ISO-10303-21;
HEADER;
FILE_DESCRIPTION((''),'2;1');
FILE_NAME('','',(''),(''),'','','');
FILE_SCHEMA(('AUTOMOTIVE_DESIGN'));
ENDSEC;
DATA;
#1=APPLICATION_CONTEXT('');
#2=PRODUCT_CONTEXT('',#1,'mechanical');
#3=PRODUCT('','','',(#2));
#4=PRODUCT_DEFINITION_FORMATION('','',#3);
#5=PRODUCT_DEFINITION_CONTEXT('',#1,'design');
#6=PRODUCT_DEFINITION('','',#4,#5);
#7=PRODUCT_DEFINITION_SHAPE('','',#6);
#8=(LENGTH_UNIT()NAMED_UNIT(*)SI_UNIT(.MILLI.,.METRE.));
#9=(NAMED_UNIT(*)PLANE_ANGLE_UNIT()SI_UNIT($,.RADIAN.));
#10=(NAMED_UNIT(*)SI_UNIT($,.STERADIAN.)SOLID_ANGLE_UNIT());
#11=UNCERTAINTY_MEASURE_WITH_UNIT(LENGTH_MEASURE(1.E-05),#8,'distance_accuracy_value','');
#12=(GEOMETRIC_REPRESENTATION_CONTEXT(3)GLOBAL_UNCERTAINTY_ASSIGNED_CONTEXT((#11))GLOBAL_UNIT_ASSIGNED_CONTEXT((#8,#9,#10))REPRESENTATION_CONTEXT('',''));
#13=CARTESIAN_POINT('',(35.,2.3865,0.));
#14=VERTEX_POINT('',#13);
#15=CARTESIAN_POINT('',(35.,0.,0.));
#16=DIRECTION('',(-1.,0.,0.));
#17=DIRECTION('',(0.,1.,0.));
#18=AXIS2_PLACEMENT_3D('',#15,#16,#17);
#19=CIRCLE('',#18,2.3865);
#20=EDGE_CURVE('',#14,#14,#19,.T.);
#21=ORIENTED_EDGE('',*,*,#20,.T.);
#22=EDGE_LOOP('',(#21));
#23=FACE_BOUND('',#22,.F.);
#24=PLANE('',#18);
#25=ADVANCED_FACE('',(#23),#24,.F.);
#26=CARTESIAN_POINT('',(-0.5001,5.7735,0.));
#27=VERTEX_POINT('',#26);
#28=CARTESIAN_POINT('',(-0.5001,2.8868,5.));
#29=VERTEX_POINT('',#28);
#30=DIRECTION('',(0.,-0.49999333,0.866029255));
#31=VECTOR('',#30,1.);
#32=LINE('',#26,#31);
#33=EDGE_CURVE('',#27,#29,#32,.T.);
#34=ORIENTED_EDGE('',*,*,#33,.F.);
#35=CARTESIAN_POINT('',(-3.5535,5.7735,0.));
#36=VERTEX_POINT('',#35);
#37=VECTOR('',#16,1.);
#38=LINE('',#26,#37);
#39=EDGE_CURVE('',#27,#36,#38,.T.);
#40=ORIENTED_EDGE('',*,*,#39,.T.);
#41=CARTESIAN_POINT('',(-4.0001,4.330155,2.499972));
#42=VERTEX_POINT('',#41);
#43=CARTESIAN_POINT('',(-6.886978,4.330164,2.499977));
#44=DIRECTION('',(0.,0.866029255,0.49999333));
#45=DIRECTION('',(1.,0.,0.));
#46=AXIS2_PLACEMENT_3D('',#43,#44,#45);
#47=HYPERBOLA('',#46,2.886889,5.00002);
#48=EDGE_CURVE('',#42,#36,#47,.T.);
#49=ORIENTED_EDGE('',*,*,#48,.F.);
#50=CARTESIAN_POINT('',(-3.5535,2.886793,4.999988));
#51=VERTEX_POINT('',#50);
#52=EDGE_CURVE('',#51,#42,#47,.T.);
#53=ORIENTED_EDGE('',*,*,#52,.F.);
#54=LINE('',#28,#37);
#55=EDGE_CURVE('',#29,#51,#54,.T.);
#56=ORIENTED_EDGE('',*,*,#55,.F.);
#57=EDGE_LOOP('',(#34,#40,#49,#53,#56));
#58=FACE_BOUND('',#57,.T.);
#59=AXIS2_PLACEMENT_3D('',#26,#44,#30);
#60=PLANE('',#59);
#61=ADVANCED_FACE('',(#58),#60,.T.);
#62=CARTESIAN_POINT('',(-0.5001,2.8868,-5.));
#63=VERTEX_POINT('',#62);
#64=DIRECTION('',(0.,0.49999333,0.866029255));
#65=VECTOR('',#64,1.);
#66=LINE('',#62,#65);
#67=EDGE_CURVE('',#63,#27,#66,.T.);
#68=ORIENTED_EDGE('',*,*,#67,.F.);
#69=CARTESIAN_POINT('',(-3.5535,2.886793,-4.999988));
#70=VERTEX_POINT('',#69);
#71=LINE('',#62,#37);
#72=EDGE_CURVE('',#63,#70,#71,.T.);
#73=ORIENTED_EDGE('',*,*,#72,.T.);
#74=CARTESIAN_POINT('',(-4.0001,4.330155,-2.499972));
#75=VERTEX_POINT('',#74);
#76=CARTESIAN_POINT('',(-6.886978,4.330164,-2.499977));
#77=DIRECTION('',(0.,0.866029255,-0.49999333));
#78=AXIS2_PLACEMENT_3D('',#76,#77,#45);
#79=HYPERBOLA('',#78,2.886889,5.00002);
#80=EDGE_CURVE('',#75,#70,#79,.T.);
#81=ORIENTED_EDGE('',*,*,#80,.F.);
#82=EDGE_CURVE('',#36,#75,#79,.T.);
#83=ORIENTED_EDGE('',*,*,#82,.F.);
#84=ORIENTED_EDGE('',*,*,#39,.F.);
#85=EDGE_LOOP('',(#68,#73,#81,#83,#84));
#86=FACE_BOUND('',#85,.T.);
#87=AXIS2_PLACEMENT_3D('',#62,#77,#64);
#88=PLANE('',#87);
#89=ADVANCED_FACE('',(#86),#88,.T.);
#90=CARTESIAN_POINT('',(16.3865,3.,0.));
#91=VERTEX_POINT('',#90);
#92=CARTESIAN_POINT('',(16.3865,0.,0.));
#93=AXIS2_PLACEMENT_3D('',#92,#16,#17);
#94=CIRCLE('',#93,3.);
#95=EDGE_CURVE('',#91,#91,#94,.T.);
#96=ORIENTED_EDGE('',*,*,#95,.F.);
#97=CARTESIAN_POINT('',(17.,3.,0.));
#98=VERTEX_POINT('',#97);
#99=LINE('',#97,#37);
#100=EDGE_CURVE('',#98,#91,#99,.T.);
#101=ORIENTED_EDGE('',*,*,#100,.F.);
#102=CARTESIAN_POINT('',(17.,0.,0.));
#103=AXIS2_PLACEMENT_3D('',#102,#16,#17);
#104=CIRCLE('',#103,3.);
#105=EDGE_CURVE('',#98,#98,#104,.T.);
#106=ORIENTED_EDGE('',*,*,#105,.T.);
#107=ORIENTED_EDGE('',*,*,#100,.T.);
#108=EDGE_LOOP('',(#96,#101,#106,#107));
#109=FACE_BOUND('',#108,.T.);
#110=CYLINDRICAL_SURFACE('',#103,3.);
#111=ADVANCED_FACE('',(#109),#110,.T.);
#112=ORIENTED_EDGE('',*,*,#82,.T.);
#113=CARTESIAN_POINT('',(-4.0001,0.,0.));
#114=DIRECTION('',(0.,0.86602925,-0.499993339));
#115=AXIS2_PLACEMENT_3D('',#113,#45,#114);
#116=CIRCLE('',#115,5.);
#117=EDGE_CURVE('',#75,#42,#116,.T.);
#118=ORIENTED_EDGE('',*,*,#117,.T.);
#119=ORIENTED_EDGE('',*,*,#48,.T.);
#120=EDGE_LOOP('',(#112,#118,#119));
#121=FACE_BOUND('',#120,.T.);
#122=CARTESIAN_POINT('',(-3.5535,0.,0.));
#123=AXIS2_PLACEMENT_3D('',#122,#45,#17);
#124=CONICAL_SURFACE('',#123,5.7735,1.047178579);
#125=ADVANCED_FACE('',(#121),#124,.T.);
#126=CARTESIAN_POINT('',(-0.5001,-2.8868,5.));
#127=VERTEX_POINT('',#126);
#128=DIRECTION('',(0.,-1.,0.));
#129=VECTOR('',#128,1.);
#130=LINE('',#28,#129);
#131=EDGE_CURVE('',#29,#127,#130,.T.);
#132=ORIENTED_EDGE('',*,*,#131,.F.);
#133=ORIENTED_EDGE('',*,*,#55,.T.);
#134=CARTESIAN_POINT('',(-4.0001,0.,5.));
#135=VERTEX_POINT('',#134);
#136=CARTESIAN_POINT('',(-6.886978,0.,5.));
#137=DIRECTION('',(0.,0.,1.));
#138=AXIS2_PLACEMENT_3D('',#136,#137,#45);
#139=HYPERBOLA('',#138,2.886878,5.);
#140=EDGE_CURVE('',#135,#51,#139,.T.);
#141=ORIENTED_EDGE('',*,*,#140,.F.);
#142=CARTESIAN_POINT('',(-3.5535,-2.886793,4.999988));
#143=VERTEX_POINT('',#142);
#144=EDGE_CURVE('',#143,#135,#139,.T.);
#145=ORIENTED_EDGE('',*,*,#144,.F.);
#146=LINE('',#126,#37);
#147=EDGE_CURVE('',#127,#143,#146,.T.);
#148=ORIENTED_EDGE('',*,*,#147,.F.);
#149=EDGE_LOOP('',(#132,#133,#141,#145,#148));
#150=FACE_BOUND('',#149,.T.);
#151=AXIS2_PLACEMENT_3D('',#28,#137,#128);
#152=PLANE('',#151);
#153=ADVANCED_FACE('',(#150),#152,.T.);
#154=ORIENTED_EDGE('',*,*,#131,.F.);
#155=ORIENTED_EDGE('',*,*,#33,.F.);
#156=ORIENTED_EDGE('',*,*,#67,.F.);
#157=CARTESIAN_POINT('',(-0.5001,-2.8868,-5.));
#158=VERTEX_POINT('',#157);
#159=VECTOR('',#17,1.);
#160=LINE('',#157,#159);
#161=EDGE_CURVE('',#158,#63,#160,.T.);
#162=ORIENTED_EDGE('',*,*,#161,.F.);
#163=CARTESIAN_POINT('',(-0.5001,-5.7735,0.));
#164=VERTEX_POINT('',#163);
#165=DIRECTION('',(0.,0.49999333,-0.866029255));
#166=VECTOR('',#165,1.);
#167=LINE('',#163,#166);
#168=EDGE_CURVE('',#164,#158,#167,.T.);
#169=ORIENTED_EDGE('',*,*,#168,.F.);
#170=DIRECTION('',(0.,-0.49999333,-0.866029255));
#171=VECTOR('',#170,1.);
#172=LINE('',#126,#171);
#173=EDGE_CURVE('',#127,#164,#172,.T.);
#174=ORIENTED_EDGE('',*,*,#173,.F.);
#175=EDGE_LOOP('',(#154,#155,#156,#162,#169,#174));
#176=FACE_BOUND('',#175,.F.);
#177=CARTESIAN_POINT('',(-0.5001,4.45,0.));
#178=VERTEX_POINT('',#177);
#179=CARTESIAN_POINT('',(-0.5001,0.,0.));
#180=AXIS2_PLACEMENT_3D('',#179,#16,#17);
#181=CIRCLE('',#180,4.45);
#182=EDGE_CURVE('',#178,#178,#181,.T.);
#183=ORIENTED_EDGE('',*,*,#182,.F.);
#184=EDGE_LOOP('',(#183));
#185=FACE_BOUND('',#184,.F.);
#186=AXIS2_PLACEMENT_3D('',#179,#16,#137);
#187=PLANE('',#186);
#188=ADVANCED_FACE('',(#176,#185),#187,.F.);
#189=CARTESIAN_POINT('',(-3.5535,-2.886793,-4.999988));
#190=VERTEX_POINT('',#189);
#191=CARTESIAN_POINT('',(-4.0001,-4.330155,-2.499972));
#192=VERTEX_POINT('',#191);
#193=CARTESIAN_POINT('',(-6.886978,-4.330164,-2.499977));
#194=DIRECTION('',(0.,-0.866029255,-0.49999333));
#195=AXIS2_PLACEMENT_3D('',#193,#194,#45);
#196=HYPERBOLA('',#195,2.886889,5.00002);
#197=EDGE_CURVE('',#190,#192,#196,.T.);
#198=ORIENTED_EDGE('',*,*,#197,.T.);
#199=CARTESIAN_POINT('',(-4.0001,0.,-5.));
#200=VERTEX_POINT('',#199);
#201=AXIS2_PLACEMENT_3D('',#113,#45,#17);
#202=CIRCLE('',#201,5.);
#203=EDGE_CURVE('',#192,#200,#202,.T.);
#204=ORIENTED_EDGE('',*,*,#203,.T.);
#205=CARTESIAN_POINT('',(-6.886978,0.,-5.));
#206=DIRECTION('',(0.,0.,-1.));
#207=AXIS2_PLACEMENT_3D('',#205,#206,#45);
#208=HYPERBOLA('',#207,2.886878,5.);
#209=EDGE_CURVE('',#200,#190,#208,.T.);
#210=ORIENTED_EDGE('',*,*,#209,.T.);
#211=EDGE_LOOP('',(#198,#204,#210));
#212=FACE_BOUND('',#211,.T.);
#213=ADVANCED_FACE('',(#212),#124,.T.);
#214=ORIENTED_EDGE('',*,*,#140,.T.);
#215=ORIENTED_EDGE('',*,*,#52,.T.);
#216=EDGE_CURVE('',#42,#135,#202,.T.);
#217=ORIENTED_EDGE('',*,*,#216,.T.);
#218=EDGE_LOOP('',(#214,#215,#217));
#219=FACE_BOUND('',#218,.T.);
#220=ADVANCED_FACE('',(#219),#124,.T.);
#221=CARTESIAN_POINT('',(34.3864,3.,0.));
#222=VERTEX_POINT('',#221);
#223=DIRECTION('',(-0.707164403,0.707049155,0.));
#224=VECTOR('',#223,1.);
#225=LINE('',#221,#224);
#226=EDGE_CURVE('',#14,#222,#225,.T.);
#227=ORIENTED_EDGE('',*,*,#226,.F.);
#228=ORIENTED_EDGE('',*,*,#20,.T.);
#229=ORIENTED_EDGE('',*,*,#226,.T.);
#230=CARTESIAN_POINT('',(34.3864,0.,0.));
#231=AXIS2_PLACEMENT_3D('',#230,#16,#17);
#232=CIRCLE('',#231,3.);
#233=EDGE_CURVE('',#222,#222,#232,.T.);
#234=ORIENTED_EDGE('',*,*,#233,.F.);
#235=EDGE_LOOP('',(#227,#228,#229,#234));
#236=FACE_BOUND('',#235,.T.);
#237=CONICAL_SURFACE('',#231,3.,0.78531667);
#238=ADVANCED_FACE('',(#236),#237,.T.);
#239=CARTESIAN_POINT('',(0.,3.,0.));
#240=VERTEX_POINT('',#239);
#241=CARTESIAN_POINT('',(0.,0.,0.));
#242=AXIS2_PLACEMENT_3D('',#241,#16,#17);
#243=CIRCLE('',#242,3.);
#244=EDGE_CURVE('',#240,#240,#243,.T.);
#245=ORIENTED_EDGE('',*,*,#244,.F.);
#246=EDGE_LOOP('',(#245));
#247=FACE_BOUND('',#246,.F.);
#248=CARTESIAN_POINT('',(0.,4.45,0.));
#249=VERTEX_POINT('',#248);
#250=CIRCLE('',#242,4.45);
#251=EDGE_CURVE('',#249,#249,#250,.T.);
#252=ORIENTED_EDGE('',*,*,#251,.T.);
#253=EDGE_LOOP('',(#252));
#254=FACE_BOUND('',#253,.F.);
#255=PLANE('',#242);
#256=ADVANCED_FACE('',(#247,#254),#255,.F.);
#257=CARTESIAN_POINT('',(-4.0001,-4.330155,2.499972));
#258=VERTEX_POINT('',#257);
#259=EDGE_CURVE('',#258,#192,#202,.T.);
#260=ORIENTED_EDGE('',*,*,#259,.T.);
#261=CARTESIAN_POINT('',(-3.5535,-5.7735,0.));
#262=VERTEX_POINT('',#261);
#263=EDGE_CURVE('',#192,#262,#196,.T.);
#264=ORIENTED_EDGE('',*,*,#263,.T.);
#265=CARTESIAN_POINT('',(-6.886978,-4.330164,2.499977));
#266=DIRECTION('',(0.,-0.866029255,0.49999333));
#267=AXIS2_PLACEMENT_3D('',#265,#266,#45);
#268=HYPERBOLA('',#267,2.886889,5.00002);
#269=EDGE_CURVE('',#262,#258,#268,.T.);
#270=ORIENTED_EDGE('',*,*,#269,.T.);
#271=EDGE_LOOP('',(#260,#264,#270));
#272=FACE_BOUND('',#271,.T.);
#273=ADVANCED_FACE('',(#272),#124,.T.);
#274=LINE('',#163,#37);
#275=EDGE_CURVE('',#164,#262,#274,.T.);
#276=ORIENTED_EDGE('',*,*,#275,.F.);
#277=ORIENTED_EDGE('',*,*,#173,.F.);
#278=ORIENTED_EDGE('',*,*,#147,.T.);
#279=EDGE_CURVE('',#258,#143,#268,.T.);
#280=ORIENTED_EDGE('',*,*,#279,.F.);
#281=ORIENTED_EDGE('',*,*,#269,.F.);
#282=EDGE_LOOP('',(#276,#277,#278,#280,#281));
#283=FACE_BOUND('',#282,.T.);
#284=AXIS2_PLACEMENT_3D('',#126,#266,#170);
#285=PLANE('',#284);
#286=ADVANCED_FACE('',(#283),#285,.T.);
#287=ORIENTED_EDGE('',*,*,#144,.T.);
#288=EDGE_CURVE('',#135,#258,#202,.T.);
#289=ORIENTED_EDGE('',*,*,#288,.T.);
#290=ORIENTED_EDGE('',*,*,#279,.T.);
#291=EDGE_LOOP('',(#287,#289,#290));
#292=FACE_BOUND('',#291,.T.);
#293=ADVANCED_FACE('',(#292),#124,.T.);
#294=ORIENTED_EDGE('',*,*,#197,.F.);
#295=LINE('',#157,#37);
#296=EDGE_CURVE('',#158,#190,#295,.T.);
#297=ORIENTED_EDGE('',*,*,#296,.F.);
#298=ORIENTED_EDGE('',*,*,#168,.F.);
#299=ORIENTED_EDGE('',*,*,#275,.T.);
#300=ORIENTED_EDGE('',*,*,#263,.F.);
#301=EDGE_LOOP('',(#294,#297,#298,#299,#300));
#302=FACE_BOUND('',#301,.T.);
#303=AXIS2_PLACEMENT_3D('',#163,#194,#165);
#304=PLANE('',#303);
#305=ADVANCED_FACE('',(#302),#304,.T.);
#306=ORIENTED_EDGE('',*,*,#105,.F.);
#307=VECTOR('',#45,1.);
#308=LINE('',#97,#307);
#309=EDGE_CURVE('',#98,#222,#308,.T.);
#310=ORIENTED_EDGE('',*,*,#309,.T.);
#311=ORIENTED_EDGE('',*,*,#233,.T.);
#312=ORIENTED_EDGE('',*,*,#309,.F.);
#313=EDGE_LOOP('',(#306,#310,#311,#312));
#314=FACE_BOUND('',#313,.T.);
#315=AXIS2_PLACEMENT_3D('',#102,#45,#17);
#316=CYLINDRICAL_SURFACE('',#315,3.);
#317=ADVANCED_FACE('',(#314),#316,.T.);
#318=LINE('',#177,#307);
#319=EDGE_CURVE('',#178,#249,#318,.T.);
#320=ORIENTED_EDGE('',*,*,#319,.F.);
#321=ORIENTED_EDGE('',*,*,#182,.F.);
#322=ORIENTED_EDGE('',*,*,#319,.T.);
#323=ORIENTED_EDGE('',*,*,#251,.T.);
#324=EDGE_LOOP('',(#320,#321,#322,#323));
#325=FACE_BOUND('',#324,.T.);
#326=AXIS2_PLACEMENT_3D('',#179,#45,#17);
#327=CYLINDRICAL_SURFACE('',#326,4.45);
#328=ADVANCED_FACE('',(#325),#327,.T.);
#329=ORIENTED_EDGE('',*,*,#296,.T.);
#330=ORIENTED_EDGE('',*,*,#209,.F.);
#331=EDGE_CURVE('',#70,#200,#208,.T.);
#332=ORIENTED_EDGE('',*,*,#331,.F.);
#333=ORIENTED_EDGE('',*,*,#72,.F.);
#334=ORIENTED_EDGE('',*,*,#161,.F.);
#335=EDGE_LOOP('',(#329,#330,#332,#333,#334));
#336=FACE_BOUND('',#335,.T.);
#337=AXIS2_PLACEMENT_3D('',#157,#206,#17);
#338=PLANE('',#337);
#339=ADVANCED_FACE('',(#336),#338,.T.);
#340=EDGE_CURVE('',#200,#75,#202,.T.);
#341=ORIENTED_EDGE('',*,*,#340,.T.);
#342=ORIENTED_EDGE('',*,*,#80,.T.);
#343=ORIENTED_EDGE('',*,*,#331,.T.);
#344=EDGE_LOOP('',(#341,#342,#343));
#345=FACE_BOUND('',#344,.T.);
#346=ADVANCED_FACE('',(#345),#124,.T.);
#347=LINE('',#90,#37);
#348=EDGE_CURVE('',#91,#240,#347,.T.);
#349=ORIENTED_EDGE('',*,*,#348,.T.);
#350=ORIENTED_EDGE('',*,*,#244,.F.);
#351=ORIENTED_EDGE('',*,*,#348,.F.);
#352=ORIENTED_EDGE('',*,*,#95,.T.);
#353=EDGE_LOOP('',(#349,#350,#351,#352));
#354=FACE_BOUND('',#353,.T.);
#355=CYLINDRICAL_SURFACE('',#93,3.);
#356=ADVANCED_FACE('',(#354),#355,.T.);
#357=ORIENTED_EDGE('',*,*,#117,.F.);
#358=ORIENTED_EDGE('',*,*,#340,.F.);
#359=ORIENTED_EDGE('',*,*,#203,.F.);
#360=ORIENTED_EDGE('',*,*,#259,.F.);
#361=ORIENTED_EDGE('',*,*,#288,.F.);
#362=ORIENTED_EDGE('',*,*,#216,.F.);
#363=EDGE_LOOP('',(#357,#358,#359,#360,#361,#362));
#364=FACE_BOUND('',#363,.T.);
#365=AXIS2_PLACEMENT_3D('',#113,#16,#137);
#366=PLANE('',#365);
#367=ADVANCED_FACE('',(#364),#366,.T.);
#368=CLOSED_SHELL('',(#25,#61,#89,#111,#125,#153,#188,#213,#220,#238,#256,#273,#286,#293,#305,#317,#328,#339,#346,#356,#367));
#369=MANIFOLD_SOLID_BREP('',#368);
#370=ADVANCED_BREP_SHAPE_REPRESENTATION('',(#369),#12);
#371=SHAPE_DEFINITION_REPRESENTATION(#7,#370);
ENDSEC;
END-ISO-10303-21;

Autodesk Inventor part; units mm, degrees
ref_plane "YZ Plane" through (0, 0, 0) normal (1, 0, 0) x (0, 1, 0)
ref_plane "XZ Plane" through (0, 0, 0) normal (0, 1, 0) x (-1, 0, 0)
sketch "Skizze1" plane through (0, 0, 0) normal (0, 0, 1) x (1, 0, 0)
  line L0 (0, 4.45) -> (0, 3)
  line L1 (17, 3) -> (35, 3)
  line L2 (35, 3) -> (35, 0)
  line L3 (35, 0) -> (-0.5001, 0)
  line L4 (-7.6001, 0) -> (42.1, 0) projected
  line L5 (-0.5001, 0) -> (-0.5001, 4.45)
  line L6 (-0.5001, 4.45) -> (0, 4.45)
  line L7 (17, 3) -> (16.3865, 3)
  line L8 (16.3865, 3) -> (0, 3)
  line L9 (0, -0.89) -> (0, 5.34) projected
  dimension "d0" = 35
  dimension "d1" = 18
  dimension "d2" = 6
  dimension "d9" = 0.5001
  dimension "d10" = 8.9
  dimension "d13" = 0.6136
  dimension "d14" = 6
revolve "Körper" add sketch "Skizze1" angle 360 about axis through (35, 0, 0) along (-1, 0, 0)
sketch "Skizze2" plane through (-0.5001, 0, 0) normal (-1, 0, 0) x (0, 0, 1)
  line L0 (0, 5.7735) -> (5, 2.8868)
  line L1 (5, 2.8868) -> (5, -2.8868)
  line L2 (5, -2.8868) -> (0, -5.7735)
  line L3 (0, -5.7735) -> (-5, -2.8868)
  line L4 (-5, -2.8868) -> (-5, 2.8868)
  line L5 (-5, 2.8868) -> (0, 5.7735)
  point P0 (0, 0)
  point P1 (0, 0)
  dimension "d11" = 10
extrude "Kopf" add sketch "Skizze2" along normal blind 3.5
sketch "Skizze4" plane through (0, 0, 0) normal (0, 0, 1) x (1, 0, 0)
  line L0 (-4.0001, 5) -> (-4.0001, 5.7735)
  line L1 (-4.0001, 5.7735) -> (-3.5535, 5.7735)
  line L2 (-3.5535, 5.7735) -> (-4.0001, 5)
  line L3 (-4.7001, 0) -> (0.1999, 0) projected
  line L4 (-0.5001, 5.7735) -> (-4.0001, 5.7735) projected
  line L5 (-4.0001, 2.8868) -> (-4.0001, 5.7735) projected
  dimension "d5" = 30
  dimension "d19" = 10
revolve "Fase1" cut sketch "Skizze4" angle 360 about axis through (-10, 0, 0) along (1, 0, 0)
thread "Gewinde" size "M6x1" class "6g" standard "ISO Metric profile" length 18
chamfer "Fase2" distance 0.6135 distance2 0.6136 1 edges at (35, -3, 0) measured on face at (35, -0.5525, 1.8157)
ref_plane "Work Plane1" through (1.525, 0, 0) normal (0, 0, 1) x (1, 0, 0)
equation "\"d0\" = NLG"
equation "\"d1\" = GEL"
equation "\"d2\" = GD"
equation "\"d10\" = SD2"
equation "\"d14\" = BDM"
equation "\"d11\" = SW"
equation "\"d3\" = KOH - SD"
equation "\"d5\" = ANG1"
equation "\"d19\" = SW0"
equation "\"d15\" = GEL"
equation "\"d6\" = -0.5 * SPD + 0.5 * GD"
equation "\"NLG\" = 35"
equation "\"GD\" = NND"
equation "\"BDM\" = NND"
equation "\"KOH\" = 4"
equation "\"GEL\" = 18"
equation "\"SW\" = 10"
equation "\"SW0\" = SW"
equation "\"SPD\" = NND - 1.2269 * PTC"
equation "\"SD2\" = 8.9"
equation "\"SD\" = 0.5"
equation "\"ANG1\" = 30deg"
equation "\"GAL\" = 0.61345 * PTC"
equation "\"GUL\" = 0.61345 * PTC"
equation "\"RR\" = 0.25"
equation "\"GD1\" = THREADDIA - 1.2269 * PTC"
equation "\"THREADDIA\" = 6"
equation "\"TOA\" = 30deg"
equation "\"PTC\" = 1"
equation "\"NND\" = 6"
equation "\"E0\" = 1.155 * SW"
properties part number "DIN 931-1 - M6 x 35" material "Stahl, weich"
